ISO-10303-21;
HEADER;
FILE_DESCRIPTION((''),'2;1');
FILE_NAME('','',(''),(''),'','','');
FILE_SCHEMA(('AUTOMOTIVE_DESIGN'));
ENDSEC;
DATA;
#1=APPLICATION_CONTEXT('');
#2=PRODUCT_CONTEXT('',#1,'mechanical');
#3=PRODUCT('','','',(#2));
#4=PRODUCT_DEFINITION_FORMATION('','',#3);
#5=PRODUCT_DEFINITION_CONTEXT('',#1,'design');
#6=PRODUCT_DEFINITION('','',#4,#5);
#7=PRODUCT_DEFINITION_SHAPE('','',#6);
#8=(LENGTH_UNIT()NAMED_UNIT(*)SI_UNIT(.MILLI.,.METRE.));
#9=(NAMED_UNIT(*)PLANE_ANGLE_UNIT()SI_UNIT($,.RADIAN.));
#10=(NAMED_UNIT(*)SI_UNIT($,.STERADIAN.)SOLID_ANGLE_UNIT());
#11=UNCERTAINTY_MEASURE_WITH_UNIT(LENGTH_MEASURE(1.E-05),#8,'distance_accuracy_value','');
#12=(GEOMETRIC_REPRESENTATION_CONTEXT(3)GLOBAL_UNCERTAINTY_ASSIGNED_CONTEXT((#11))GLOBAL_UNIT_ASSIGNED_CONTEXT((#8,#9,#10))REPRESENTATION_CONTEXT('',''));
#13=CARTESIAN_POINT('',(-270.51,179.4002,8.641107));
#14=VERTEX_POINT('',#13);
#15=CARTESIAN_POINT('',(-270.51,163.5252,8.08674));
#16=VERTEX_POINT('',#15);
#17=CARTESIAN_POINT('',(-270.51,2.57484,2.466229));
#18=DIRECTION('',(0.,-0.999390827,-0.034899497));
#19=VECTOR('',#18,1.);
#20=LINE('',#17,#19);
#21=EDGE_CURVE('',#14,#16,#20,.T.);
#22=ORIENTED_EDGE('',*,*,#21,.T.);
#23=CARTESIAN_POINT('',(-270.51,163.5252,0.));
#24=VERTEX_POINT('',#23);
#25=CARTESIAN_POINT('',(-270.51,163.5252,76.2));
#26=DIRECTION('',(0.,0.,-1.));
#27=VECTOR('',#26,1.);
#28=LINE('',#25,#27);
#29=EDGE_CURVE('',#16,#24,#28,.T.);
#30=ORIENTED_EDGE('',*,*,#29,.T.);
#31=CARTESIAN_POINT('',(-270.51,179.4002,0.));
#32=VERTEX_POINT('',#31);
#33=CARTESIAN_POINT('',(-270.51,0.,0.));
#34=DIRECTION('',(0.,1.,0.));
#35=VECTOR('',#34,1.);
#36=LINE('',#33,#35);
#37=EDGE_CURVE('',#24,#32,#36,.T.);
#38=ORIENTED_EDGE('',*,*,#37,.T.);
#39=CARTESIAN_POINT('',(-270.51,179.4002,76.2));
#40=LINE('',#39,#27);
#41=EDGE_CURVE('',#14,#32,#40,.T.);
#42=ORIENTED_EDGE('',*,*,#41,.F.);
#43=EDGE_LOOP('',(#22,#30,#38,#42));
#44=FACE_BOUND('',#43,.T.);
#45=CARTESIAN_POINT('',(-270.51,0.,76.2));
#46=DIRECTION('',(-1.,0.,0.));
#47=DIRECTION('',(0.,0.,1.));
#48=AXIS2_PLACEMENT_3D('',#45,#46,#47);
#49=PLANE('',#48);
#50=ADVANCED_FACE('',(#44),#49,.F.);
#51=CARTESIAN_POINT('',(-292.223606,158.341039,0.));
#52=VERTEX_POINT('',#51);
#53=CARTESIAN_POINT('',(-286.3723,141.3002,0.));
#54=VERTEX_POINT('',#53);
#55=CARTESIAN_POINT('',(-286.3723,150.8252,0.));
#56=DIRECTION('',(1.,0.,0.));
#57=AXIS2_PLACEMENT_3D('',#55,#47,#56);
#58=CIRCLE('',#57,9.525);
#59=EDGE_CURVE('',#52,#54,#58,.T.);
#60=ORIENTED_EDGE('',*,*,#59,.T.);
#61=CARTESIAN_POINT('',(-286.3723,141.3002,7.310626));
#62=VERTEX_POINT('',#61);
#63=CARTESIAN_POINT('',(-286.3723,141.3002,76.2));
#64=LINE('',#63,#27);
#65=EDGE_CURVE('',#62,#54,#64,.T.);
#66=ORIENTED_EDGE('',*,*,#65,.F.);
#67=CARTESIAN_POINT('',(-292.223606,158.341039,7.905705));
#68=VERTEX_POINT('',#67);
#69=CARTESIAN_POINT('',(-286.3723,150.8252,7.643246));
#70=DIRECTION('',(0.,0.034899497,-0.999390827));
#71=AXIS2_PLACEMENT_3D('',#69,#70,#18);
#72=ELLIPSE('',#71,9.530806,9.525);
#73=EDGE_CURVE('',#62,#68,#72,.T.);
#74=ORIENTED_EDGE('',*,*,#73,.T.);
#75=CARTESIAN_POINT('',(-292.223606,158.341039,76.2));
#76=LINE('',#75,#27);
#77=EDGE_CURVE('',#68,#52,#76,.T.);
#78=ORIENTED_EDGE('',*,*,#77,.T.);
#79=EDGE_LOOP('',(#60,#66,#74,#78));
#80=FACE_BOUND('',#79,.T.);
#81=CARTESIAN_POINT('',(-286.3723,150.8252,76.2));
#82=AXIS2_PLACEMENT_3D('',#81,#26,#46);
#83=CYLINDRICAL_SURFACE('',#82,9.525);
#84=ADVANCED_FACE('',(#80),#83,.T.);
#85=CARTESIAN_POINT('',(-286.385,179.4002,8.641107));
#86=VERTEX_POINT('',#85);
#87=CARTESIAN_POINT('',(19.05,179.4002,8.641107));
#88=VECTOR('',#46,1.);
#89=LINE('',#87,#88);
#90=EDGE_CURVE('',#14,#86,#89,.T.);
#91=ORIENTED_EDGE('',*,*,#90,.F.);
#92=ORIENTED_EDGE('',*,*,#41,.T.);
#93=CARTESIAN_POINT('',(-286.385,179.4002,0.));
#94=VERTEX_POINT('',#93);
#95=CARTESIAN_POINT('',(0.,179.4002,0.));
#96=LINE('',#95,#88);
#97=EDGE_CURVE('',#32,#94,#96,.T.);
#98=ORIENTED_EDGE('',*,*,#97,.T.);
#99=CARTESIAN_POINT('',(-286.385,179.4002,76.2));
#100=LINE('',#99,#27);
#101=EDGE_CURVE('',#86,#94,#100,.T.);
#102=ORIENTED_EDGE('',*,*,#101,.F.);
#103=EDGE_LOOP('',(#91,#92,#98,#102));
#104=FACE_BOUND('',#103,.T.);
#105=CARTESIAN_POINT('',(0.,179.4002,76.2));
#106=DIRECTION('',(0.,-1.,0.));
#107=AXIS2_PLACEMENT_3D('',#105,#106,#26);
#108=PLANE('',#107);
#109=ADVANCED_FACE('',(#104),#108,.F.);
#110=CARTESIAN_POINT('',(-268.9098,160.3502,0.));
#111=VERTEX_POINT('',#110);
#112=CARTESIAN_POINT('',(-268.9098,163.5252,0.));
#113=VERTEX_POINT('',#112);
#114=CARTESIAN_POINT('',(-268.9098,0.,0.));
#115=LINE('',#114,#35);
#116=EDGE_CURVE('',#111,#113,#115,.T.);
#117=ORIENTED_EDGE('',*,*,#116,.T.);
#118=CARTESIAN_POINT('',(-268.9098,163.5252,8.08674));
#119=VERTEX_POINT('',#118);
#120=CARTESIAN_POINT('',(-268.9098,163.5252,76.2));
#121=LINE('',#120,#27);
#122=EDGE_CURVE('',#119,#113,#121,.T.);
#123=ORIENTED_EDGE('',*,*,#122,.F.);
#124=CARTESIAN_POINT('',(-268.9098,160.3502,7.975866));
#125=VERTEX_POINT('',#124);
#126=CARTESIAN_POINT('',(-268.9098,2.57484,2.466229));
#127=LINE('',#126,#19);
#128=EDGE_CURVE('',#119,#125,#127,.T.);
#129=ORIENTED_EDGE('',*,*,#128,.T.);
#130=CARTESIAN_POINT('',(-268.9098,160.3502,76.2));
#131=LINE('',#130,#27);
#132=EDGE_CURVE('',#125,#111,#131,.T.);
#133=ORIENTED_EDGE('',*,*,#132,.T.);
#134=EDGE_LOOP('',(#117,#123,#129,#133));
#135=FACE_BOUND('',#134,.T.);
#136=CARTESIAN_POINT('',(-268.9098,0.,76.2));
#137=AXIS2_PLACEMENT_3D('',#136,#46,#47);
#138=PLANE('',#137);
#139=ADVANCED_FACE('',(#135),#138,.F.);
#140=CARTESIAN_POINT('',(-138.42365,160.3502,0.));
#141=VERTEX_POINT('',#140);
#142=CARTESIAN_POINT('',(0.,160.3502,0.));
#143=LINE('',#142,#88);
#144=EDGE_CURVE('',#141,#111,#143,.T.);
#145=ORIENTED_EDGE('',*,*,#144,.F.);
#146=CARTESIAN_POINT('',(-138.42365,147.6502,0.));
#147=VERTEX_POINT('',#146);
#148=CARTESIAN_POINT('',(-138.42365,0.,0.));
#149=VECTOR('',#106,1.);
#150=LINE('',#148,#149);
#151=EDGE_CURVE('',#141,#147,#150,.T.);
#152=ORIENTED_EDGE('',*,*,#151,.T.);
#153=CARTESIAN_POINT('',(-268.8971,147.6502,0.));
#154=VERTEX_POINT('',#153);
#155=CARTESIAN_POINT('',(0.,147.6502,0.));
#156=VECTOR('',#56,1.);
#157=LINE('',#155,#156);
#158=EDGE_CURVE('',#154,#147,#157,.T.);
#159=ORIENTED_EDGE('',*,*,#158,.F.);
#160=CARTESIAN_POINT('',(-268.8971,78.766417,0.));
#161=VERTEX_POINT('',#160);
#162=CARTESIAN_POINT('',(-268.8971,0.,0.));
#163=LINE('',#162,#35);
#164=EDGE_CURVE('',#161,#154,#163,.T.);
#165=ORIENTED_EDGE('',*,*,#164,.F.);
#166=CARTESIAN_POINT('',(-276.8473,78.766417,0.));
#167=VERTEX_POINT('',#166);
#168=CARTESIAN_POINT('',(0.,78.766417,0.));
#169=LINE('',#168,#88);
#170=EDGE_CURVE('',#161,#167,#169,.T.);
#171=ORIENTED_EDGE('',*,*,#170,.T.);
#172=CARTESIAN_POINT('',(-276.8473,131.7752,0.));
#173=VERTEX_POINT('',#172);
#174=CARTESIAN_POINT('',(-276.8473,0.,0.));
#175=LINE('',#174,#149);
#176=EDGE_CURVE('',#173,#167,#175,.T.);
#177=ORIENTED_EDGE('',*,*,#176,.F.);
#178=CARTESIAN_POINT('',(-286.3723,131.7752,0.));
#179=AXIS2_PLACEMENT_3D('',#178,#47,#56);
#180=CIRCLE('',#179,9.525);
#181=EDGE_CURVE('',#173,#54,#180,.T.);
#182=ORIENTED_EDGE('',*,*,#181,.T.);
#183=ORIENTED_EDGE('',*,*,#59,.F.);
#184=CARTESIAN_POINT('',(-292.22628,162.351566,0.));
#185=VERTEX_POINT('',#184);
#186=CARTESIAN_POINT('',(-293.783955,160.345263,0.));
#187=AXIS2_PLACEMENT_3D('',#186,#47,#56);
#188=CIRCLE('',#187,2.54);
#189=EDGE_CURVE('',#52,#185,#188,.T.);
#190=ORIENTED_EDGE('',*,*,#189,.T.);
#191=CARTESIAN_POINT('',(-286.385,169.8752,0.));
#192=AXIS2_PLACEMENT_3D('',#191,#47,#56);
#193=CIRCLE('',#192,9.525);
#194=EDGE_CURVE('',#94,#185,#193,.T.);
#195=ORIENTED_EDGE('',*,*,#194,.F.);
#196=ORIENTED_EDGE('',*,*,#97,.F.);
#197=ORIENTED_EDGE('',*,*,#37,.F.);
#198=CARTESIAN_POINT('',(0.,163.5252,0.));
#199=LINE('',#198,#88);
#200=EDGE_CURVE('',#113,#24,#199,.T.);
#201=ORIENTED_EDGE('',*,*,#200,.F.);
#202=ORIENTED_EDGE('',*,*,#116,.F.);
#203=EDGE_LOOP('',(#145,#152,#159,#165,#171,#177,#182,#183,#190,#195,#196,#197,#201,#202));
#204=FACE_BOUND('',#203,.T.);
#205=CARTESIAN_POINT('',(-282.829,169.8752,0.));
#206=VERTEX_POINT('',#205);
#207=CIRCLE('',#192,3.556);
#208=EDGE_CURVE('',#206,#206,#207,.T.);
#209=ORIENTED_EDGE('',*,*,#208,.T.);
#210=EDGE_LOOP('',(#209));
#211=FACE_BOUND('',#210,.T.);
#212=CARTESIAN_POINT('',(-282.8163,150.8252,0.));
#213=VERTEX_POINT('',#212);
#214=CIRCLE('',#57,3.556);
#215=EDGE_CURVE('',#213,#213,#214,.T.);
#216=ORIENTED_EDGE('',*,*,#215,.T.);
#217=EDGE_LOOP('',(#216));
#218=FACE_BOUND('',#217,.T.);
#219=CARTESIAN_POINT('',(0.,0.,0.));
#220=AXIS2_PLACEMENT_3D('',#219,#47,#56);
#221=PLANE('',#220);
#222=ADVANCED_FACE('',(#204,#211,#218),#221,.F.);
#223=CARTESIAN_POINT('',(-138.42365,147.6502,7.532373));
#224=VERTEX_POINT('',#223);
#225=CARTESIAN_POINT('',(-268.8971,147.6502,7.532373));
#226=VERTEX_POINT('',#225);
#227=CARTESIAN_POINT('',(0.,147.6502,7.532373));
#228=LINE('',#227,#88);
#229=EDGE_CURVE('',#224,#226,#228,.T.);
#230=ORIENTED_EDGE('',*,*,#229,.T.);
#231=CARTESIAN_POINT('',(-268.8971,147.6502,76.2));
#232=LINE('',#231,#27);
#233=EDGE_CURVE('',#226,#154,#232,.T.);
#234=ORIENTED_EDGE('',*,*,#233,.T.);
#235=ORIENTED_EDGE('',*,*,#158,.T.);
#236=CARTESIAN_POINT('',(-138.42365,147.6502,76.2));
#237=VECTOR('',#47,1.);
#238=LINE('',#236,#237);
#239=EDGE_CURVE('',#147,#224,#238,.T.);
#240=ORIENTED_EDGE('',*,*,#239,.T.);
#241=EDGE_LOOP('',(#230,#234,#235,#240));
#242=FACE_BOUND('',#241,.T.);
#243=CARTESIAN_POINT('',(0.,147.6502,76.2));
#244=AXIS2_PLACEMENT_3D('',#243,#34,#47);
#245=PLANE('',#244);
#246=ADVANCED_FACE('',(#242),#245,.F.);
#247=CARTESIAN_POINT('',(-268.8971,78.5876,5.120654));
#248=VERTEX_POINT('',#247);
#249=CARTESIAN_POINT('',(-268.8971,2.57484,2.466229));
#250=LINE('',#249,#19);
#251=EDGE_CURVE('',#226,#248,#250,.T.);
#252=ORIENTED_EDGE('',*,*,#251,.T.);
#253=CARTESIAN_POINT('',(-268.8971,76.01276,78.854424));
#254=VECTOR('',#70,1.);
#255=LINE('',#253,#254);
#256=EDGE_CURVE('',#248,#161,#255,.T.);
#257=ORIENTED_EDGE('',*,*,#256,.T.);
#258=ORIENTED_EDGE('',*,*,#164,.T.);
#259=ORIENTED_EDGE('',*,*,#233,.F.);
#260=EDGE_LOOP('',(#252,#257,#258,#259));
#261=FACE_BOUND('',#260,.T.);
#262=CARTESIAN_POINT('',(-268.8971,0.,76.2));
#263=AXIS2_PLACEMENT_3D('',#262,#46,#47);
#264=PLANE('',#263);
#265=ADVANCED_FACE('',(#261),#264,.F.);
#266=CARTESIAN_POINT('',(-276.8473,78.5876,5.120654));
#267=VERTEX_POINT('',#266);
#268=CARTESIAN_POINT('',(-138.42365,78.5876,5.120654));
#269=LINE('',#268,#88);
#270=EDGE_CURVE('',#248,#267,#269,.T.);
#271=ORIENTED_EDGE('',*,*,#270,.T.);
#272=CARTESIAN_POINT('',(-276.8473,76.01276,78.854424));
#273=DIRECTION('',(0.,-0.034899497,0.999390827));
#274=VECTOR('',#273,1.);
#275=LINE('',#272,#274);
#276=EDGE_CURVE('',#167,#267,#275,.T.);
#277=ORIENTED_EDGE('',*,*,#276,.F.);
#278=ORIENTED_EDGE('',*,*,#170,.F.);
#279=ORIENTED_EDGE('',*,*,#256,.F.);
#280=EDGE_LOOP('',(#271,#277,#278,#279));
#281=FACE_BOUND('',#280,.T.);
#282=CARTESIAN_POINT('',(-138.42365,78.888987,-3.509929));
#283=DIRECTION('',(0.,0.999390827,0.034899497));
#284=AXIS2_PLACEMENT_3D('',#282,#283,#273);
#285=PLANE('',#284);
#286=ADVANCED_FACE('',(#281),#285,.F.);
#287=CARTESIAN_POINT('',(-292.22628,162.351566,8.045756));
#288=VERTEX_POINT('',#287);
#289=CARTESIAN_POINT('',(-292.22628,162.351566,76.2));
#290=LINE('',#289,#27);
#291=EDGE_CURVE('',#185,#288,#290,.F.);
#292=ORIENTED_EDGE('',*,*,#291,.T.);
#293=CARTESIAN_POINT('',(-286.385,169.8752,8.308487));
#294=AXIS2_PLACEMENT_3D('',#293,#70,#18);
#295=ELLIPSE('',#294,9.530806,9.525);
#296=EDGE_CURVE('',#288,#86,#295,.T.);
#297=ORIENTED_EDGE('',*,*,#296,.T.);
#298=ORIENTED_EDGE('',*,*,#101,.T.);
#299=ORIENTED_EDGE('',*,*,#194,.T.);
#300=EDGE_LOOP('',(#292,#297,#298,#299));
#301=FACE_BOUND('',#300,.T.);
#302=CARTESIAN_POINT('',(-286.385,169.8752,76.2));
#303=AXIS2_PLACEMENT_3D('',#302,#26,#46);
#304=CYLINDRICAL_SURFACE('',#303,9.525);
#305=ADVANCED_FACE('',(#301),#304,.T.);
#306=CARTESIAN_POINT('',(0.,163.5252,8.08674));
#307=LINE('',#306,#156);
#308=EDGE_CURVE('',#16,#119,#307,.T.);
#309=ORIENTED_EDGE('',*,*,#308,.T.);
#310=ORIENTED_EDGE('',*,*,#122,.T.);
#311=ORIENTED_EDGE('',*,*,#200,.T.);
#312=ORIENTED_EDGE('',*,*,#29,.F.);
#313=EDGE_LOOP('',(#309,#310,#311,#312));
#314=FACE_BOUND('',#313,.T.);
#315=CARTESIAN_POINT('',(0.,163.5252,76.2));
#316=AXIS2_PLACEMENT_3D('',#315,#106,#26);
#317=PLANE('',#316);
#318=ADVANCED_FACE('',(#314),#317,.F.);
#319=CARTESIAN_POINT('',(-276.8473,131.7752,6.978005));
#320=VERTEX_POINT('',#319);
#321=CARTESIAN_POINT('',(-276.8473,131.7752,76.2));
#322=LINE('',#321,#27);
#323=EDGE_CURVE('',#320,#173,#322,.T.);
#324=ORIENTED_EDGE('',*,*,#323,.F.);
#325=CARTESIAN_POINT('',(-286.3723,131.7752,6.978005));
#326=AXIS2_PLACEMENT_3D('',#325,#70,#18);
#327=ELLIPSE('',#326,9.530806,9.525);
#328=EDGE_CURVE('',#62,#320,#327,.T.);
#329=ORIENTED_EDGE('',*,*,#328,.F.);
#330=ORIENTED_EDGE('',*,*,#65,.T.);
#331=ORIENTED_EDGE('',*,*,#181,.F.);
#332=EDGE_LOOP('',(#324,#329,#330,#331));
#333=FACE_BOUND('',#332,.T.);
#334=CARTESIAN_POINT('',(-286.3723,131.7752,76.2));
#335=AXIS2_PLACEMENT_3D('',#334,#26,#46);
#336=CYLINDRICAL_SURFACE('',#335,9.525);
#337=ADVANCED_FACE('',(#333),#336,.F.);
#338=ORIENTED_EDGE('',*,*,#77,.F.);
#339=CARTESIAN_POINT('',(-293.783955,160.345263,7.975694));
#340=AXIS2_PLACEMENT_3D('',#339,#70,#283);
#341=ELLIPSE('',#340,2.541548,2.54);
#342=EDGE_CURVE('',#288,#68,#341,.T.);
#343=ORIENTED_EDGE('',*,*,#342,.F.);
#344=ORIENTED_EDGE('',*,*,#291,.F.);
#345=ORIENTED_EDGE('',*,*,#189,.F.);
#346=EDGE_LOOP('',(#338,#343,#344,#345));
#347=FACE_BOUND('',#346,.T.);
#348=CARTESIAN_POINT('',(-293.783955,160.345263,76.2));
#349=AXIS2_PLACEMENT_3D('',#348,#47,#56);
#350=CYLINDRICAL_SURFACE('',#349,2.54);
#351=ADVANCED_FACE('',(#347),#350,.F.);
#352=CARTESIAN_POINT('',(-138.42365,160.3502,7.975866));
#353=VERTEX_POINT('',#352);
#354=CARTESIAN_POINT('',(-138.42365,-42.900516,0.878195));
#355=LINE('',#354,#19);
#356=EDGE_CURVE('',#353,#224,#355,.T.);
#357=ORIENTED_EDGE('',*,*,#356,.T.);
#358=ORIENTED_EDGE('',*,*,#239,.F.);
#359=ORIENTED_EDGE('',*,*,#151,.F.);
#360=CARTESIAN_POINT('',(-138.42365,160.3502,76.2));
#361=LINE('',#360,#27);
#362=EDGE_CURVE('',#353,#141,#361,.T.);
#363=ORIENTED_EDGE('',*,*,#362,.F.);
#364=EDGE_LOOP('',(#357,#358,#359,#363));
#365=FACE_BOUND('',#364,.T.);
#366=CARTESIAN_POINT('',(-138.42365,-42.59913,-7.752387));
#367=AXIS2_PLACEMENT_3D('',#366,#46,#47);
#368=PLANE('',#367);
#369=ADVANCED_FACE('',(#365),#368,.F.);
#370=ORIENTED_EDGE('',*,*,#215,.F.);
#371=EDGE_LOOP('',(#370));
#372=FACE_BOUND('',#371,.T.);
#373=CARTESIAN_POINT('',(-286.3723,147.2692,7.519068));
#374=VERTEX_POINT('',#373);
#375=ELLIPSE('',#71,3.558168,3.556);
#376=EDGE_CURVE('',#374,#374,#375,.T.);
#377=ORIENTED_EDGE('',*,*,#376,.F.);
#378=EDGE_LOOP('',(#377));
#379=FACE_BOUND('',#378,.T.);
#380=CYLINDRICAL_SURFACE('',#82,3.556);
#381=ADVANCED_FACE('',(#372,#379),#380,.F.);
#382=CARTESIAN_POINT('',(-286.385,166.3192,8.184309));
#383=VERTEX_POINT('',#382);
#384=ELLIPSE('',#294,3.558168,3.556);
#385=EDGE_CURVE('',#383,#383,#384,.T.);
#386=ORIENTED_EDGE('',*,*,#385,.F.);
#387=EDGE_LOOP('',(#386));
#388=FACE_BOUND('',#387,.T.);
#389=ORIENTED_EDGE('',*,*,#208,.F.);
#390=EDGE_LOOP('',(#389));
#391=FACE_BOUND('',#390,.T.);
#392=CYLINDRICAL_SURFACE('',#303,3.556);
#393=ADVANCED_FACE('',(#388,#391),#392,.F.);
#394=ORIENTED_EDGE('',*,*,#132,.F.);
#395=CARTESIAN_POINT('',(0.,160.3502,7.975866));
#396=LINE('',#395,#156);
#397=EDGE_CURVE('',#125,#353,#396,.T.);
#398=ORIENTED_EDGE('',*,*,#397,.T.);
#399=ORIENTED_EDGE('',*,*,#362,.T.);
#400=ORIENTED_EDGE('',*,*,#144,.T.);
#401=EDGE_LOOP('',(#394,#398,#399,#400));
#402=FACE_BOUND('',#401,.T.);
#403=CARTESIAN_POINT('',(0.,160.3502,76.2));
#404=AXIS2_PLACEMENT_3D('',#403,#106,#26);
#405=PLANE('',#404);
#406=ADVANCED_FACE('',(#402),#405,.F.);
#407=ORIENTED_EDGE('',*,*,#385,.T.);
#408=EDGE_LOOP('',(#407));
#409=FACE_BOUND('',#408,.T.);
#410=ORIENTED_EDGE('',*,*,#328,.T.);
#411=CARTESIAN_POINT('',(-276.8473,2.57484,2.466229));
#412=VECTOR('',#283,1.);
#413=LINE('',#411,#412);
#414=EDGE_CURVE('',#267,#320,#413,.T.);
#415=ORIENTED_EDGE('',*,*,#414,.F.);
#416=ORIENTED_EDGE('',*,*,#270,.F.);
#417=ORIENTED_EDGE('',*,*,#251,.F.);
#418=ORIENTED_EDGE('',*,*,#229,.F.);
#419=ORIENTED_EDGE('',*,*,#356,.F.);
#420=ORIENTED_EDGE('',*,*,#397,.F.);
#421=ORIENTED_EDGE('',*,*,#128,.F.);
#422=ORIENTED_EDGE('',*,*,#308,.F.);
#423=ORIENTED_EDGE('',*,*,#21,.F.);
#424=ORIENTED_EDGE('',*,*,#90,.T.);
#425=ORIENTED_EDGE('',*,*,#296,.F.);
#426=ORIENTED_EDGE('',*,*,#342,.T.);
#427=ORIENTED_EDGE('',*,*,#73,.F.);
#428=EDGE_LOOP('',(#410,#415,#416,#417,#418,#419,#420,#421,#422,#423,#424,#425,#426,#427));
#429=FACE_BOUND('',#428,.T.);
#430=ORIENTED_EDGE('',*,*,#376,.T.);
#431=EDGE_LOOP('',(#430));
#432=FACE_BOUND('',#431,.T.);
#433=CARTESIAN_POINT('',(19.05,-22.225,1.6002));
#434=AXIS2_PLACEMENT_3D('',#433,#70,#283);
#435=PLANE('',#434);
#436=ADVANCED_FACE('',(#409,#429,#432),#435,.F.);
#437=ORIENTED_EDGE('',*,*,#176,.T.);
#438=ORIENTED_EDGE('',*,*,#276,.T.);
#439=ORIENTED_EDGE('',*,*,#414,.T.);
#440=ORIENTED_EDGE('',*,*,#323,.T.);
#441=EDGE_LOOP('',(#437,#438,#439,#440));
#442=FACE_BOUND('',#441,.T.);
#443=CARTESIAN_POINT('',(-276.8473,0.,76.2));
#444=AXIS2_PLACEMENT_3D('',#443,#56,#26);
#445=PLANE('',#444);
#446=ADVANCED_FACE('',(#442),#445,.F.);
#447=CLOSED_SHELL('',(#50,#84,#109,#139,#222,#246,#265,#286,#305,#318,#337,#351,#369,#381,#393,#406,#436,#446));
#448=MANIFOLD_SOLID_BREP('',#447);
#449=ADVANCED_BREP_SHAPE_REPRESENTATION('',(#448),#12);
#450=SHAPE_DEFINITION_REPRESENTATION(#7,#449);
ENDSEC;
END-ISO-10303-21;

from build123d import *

# Parameters (mm, degrees)
BOSS_EXTRUDE1_OUTLINE_R = 3.556
BOSS_EXTRUDE1_OUTLINE_W = 260.9469
BOSS_EXTRUDE1_OUTLINE_H = 138.1252
BOSS_EXTRUDE1_DEPTH     = 76.2
CUT_EXTRUDE1_DEPTH      = 355.32482824
CUT_EXTRUDE1_DEPTH_BACK = 355.32482824
FILLET1_R               = 2.54
SKETCH7_W               = 260.9469
SKETCH7_H               = 22.1996
CUT_EXTRUDE2_DEPTH      = 347.152897849
FILLET2_R               = 6.35
SKETCH8_W               = 217.439036591
SKETCH8_H               = 235.521960295
CUT_EXTRUDE4_DEPTH      = 347.144751077
SKETCH9_W               = 181.772335281
SKETCH9_H               = 128.639747743
CUT_EXTRUDE5_DEPTH      = 347.144751077


# Read off the part's stored shape, not the designer's step: Boss-Extrude1
with BuildPart() as part:
    # Boss-Extrude1 outline → Boss-Extrude1 (new body)
    with BuildSketch(Plane.XY):
        with BuildLine():
            Line((-286.3596, -22.225), (9.525, -22.225))
            ThreePointArc((9.525, -22.225), (19.05, -12.7), (9.525, -3.175))
            ThreePointArc((9.525, -3.175), (19.05, 6.35), (9.525, 15.875))
            ThreePointArc((9.525, 15.875), (2.789807909, 18.664807909), (0, 25.4))
            Line((0, 25.4), (0, 131.7752))
            ThreePointArc((0, 131.7752), (2.789807909, 138.510392091), (9.525, 141.3002))
            ThreePointArc((9.525, 141.3002), (19.05, 150.8252), (9.525, 160.3502))
            ThreePointArc((9.525, 160.3502), (19.05, 169.8752), (9.525, 179.4002))
            Line((9.525, 179.4002), (-6.35, 179.4002))
            Line((-6.35, 179.4002), (-6.35, 163.5252))
            Line((-6.35, 163.5252), (-7.9502, 163.5252))
            Line((-7.9502, 163.5252), (-7.9502, 160.3502))
            Line((-7.9502, 160.3502), (-268.9098, 160.3502))
            Line((-268.9098, 160.3502), (-268.9098, 163.5252))
            Line((-268.9098, 163.5252), (-270.51, 163.5252))
            Line((-270.51, 163.5252), (-270.51, 179.4002))
            Line((-270.51, 179.4002), (-286.385, 179.4002))
            ThreePointArc((-286.385, 179.4002), (-295.91, 169.8752), (-286.385, 160.3502))
            ThreePointArc((-286.385, 160.3502), (-295.897297883, 150.818850004), (-286.3723, 141.3002))
            ThreePointArc((-286.3723, 141.3002), (-279.637107909, 138.510392091), (-276.8473, 131.7752))
            Line((-276.8473, 131.7752), (-276.8473, 25.4))
            ThreePointArc((-276.8473, 25.4), (-279.637107909, 18.664807909), (-286.3723, 15.875))
            ThreePointArc((-286.3723, 15.875), (-295.8973, 6.35), (-286.3723, -3.175))
            ThreePointArc((-286.3723, -3.175), (-295.884597883, -12.706349996), (-286.3596, -22.225))
        make_face()
        with Locations((-286.3596, -12.7)):
            Circle(BOSS_EXTRUDE1_OUTLINE_R, mode=Mode.SUBTRACT)
        with Locations((-286.3723, 6.35)):
            Circle(BOSS_EXTRUDE1_OUTLINE_R, mode=Mode.SUBTRACT)
        with Locations((9.525, -12.7)):
            Circle(BOSS_EXTRUDE1_OUTLINE_R, mode=Mode.SUBTRACT)
        with Locations((9.525, 6.35)):
            Circle(BOSS_EXTRUDE1_OUTLINE_R, mode=Mode.SUBTRACT)
        with Locations((-286.3723, 150.8252)):
            Circle(BOSS_EXTRUDE1_OUTLINE_R, mode=Mode.SUBTRACT)
        with Locations((-286.385, 169.8752)):
            Circle(BOSS_EXTRUDE1_OUTLINE_R, mode=Mode.SUBTRACT)
        with Locations((-138.42365, 78.5876)):
            Rectangle(BOSS_EXTRUDE1_OUTLINE_W, BOSS_EXTRUDE1_OUTLINE_H, mode=Mode.SUBTRACT)
        with Locations((9.525, 150.8252)):
            Circle(BOSS_EXTRUDE1_OUTLINE_R, mode=Mode.SUBTRACT)
        with Locations((9.525, 169.8752)):
            Circle(BOSS_EXTRUDE1_OUTLINE_R, mode=Mode.SUBTRACT)
    extrude(amount=BOSS_EXTRUDE1_DEPTH)

    # Sketch5 → Cut-Extrude1 (cut, two sides: drawn at the far end of the back side and taken through both)
    with BuildSketch(Plane.ZY.offset(276.8473).offset(-CUT_EXTRUDE1_DEPTH_BACK)):
        Polygon((1.6002, -22.225), (8.641107133, 179.4002), (76.2, 179.4002), (76.2, -22.225), align=None)
    extrude(amount=CUT_EXTRUDE1_DEPTH + CUT_EXTRUDE1_DEPTH_BACK, mode=Mode.SUBTRACT)

    # Fillet1
    fillet1_edges = [part.edges().sort_by_distance(p)[0] for p in [
        (-286.385, 160.3502, 3.987933237),
        (-286.3723, -3.175, 1.132720329),
        (9.525, -3.175, 1.132720329),
        (9.525, 160.3502, 3.987933237),
    ]]
    fillet(fillet1_edges, radius=FILLET1_R)

    # Sketch7 → Cut-Extrude2 (cut, through all)
    with BuildSketch(Plane(origin=(0, 0, 0), x_dir=(-1, 0, 0), z_dir=(0, 0, -1))):
        with Locations((138.42365, -6.35)):
            Rectangle(SKETCH7_W, SKETCH7_H)
    extrude(amount=-CUT_EXTRUDE2_DEPTH, mode=Mode.SUBTRACT)

    # Fillet2
    fillet2_edges = [part.edges().sort_by_distance(p)[0] for p in [
        (-268.8971, 4.7498, 1.271090386),
        (-268.8971, -17.4498, 0.883476829),
        (-7.9502, -17.4498, 0.883476829),
        (-7.9502, 4.7498, 1.271090386),
    ]]
    fillet(fillet2_edges, radius=FILLET2_R)

    # Sketch8 → Cut-Extrude4 (cut, through all)
    with BuildSketch(Plane(origin=(0, -0.082881646, 2.373419811), x_dir=(1, 0, 0), z_dir=(0, -0.03489949670250444, 0.9993908270190958))):
        with Locations((-29.704131704, 74.917246318)):
            Rectangle(SKETCH8_W, SKETCH8_H)
    extrude(amount=-CUT_EXTRUDE4_DEPTH, mode=Mode.SUBTRACT)

    # Sketch9 → Cut-Extrude5 (cut, through all)
    with BuildSketch(Plane(origin=(0, -0.082881646, 2.373419811), x_dir=(1, 0, 0), z_dir=(0, -0.03489949670250444, 0.9993908270190958))):
        with Locations((-229.309817641, 14.398560918)):
            Rectangle(SKETCH9_W, SKETCH9_H)
    extrude(amount=-CUT_EXTRUDE5_DEPTH, mode=Mode.SUBTRACT)


solid = part.part
